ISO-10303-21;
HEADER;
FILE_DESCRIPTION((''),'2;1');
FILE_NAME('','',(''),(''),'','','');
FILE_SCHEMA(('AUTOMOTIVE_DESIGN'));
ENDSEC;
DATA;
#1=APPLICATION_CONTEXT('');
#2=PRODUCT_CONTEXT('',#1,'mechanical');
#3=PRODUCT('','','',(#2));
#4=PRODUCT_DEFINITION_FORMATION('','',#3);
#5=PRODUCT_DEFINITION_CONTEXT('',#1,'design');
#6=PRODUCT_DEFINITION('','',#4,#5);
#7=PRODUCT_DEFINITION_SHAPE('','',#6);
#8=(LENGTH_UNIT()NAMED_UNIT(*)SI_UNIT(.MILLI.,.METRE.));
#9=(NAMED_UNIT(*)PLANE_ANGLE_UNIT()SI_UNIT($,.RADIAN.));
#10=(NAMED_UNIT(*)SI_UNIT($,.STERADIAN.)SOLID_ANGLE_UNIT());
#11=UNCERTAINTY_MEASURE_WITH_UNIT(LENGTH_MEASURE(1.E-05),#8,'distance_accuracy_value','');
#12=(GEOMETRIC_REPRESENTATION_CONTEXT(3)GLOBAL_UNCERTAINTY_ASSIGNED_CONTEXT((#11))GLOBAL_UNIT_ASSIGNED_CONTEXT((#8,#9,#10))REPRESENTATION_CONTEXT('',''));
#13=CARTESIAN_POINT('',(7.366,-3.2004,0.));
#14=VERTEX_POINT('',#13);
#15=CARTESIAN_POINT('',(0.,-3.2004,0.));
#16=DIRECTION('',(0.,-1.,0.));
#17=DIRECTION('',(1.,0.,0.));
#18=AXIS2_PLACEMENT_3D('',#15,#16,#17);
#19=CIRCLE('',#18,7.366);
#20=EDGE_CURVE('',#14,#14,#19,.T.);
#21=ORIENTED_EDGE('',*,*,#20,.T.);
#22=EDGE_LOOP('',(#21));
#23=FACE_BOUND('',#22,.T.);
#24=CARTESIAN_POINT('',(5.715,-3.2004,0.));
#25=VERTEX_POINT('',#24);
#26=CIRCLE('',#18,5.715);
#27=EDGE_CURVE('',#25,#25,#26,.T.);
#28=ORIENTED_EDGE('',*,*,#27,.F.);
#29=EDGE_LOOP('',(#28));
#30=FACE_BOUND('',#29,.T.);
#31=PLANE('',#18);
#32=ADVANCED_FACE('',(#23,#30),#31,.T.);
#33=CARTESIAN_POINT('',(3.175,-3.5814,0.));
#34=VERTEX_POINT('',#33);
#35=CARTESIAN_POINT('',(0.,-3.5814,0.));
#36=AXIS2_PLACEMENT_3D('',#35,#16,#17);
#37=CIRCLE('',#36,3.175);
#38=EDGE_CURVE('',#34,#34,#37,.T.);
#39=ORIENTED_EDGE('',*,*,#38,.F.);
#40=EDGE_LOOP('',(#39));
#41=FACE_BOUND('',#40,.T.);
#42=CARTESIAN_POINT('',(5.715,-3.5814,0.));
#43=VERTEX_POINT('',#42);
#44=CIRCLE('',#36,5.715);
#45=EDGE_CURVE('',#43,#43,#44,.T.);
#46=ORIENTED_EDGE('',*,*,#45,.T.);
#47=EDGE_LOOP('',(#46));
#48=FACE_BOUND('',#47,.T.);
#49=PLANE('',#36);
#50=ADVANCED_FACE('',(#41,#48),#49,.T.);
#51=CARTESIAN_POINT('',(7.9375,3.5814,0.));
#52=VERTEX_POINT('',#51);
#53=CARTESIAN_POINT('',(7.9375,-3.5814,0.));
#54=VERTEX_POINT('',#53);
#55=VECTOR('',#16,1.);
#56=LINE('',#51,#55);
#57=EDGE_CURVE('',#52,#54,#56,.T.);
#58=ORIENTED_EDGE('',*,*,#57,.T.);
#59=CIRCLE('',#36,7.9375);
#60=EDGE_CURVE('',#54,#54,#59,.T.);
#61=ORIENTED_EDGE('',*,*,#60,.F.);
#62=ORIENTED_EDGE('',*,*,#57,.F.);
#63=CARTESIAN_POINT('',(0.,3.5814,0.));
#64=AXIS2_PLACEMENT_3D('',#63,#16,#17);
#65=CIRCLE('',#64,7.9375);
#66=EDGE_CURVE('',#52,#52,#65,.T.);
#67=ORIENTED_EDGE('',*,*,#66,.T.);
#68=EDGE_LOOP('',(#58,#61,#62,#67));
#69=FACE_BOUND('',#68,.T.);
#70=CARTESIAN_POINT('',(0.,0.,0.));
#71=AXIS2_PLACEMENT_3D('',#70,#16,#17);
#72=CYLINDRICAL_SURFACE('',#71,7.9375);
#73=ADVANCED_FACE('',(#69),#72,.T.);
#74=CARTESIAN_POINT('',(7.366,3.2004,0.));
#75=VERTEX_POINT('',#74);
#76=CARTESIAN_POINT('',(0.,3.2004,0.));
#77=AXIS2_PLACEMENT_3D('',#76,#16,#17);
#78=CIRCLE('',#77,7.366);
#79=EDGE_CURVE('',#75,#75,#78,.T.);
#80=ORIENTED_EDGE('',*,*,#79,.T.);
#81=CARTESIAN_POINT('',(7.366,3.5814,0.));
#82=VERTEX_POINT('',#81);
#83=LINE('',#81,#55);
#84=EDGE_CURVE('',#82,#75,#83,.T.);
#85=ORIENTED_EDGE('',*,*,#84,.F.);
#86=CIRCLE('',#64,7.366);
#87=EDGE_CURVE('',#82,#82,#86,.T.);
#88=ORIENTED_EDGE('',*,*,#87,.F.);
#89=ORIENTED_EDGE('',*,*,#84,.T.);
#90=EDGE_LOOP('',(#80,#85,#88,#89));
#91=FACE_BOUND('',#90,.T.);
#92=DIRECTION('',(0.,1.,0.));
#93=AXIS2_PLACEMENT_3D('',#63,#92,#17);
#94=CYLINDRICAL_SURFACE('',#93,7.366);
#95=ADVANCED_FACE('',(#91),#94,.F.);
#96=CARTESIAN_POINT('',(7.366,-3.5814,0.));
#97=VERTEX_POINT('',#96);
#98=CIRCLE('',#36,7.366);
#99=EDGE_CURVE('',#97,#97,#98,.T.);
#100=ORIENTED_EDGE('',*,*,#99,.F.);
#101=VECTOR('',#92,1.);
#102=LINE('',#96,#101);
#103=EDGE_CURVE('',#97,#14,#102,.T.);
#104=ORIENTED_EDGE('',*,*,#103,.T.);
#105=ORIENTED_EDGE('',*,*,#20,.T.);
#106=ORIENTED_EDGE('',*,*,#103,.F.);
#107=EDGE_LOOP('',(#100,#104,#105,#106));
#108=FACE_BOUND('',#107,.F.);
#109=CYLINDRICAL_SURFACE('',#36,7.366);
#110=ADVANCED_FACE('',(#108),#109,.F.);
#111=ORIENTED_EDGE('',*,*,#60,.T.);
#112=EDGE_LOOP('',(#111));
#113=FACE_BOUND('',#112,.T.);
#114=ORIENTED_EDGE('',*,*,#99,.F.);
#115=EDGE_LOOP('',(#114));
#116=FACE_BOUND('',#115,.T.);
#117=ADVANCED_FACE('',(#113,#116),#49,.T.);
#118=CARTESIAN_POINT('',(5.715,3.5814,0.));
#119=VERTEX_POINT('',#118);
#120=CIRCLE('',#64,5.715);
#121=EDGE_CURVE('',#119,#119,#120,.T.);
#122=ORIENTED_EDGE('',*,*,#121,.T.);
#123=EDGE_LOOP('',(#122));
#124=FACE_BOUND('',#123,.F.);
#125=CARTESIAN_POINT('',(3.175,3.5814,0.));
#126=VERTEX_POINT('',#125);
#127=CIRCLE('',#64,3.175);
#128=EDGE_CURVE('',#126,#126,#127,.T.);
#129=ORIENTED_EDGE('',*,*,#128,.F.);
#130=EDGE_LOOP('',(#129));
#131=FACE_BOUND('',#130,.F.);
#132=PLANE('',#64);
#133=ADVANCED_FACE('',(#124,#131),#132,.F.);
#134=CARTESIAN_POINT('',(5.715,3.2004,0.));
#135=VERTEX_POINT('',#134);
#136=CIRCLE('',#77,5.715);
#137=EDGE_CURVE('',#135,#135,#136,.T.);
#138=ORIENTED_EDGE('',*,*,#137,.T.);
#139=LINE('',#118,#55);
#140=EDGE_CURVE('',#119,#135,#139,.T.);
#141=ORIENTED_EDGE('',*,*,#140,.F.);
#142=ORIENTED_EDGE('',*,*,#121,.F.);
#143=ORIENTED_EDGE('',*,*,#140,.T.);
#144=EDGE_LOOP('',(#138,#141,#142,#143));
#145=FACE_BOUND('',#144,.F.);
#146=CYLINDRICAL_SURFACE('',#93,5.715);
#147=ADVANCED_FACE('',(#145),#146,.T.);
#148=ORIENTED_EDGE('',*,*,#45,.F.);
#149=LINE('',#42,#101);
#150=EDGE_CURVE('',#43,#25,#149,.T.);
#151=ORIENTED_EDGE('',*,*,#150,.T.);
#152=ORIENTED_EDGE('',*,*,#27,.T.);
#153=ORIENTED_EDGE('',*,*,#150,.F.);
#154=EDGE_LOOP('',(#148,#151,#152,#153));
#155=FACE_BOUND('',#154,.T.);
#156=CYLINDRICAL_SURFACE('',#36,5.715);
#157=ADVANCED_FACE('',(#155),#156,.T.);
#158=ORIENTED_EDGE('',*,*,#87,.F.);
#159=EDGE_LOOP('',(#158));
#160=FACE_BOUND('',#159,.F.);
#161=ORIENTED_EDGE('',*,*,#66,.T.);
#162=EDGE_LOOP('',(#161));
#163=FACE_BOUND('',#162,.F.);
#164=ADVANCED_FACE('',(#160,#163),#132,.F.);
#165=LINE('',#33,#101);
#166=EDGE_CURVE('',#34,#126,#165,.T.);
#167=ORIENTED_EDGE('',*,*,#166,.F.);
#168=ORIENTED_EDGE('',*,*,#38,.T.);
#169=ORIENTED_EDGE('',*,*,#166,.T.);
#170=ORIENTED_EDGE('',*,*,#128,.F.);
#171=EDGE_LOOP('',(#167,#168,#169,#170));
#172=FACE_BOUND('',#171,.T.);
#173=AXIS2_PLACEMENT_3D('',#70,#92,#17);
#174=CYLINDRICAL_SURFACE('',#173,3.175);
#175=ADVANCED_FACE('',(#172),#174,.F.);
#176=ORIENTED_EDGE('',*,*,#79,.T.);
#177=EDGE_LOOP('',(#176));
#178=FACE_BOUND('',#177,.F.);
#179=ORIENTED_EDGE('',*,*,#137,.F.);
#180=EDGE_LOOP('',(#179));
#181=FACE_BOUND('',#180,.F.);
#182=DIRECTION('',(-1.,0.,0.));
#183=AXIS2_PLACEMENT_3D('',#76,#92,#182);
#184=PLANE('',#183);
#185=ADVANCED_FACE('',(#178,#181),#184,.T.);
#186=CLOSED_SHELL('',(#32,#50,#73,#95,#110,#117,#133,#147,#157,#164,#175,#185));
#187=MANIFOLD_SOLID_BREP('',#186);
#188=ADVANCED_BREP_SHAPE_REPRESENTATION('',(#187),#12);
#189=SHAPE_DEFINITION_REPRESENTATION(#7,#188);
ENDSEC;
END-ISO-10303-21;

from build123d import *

# Parameters (mm, degrees)
F0_R     = 7.9375
F0_R_2   = 5.08
F1_DEPTH = 3.5814
F2_R     = 7.366
F2_R_2   = 5.715
F3_DEPTH = 0.381
F4_R     = 5.08
F4_R_2   = 3.175
F5_DEPTH = 3.5814


# Not quite as in the source:
# - a pattern or mirror of a feature is missing from the dataset's text; its kind, count and spacing are read off the source's solid


with BuildPart() as f1:
    # F0 (on Front) → F1 (new body, symmetric)
    with BuildSketch(Plane.XZ):
        Circle(F0_R)
        Circle(F0_R_2, mode=Mode.SUBTRACT)
    extrude(amount=F1_DEPTH, both=True)

    # F2 (on face) → F3 (cut)
    with BuildSketch(Plane.XZ.offset(3.5814)):
        Circle(F2_R)
        Circle(F2_R_2, mode=Mode.SUBTRACT)
    f3 = extrude(amount=-F3_DEPTH, mode=Mode.SUBTRACT)

    # F3_copies: F3 across plane
    add(f3.mirror(Plane.ZX), mode=Mode.SUBTRACT)

    # F4 (on Front) → F5 (join, symmetric)
    with BuildSketch(Plane.XZ):
        Circle(F4_R)
        Circle(F4_R_2, mode=Mode.SUBTRACT)
    extrude(amount=F5_DEPTH, both=True)


solid = f1.part
